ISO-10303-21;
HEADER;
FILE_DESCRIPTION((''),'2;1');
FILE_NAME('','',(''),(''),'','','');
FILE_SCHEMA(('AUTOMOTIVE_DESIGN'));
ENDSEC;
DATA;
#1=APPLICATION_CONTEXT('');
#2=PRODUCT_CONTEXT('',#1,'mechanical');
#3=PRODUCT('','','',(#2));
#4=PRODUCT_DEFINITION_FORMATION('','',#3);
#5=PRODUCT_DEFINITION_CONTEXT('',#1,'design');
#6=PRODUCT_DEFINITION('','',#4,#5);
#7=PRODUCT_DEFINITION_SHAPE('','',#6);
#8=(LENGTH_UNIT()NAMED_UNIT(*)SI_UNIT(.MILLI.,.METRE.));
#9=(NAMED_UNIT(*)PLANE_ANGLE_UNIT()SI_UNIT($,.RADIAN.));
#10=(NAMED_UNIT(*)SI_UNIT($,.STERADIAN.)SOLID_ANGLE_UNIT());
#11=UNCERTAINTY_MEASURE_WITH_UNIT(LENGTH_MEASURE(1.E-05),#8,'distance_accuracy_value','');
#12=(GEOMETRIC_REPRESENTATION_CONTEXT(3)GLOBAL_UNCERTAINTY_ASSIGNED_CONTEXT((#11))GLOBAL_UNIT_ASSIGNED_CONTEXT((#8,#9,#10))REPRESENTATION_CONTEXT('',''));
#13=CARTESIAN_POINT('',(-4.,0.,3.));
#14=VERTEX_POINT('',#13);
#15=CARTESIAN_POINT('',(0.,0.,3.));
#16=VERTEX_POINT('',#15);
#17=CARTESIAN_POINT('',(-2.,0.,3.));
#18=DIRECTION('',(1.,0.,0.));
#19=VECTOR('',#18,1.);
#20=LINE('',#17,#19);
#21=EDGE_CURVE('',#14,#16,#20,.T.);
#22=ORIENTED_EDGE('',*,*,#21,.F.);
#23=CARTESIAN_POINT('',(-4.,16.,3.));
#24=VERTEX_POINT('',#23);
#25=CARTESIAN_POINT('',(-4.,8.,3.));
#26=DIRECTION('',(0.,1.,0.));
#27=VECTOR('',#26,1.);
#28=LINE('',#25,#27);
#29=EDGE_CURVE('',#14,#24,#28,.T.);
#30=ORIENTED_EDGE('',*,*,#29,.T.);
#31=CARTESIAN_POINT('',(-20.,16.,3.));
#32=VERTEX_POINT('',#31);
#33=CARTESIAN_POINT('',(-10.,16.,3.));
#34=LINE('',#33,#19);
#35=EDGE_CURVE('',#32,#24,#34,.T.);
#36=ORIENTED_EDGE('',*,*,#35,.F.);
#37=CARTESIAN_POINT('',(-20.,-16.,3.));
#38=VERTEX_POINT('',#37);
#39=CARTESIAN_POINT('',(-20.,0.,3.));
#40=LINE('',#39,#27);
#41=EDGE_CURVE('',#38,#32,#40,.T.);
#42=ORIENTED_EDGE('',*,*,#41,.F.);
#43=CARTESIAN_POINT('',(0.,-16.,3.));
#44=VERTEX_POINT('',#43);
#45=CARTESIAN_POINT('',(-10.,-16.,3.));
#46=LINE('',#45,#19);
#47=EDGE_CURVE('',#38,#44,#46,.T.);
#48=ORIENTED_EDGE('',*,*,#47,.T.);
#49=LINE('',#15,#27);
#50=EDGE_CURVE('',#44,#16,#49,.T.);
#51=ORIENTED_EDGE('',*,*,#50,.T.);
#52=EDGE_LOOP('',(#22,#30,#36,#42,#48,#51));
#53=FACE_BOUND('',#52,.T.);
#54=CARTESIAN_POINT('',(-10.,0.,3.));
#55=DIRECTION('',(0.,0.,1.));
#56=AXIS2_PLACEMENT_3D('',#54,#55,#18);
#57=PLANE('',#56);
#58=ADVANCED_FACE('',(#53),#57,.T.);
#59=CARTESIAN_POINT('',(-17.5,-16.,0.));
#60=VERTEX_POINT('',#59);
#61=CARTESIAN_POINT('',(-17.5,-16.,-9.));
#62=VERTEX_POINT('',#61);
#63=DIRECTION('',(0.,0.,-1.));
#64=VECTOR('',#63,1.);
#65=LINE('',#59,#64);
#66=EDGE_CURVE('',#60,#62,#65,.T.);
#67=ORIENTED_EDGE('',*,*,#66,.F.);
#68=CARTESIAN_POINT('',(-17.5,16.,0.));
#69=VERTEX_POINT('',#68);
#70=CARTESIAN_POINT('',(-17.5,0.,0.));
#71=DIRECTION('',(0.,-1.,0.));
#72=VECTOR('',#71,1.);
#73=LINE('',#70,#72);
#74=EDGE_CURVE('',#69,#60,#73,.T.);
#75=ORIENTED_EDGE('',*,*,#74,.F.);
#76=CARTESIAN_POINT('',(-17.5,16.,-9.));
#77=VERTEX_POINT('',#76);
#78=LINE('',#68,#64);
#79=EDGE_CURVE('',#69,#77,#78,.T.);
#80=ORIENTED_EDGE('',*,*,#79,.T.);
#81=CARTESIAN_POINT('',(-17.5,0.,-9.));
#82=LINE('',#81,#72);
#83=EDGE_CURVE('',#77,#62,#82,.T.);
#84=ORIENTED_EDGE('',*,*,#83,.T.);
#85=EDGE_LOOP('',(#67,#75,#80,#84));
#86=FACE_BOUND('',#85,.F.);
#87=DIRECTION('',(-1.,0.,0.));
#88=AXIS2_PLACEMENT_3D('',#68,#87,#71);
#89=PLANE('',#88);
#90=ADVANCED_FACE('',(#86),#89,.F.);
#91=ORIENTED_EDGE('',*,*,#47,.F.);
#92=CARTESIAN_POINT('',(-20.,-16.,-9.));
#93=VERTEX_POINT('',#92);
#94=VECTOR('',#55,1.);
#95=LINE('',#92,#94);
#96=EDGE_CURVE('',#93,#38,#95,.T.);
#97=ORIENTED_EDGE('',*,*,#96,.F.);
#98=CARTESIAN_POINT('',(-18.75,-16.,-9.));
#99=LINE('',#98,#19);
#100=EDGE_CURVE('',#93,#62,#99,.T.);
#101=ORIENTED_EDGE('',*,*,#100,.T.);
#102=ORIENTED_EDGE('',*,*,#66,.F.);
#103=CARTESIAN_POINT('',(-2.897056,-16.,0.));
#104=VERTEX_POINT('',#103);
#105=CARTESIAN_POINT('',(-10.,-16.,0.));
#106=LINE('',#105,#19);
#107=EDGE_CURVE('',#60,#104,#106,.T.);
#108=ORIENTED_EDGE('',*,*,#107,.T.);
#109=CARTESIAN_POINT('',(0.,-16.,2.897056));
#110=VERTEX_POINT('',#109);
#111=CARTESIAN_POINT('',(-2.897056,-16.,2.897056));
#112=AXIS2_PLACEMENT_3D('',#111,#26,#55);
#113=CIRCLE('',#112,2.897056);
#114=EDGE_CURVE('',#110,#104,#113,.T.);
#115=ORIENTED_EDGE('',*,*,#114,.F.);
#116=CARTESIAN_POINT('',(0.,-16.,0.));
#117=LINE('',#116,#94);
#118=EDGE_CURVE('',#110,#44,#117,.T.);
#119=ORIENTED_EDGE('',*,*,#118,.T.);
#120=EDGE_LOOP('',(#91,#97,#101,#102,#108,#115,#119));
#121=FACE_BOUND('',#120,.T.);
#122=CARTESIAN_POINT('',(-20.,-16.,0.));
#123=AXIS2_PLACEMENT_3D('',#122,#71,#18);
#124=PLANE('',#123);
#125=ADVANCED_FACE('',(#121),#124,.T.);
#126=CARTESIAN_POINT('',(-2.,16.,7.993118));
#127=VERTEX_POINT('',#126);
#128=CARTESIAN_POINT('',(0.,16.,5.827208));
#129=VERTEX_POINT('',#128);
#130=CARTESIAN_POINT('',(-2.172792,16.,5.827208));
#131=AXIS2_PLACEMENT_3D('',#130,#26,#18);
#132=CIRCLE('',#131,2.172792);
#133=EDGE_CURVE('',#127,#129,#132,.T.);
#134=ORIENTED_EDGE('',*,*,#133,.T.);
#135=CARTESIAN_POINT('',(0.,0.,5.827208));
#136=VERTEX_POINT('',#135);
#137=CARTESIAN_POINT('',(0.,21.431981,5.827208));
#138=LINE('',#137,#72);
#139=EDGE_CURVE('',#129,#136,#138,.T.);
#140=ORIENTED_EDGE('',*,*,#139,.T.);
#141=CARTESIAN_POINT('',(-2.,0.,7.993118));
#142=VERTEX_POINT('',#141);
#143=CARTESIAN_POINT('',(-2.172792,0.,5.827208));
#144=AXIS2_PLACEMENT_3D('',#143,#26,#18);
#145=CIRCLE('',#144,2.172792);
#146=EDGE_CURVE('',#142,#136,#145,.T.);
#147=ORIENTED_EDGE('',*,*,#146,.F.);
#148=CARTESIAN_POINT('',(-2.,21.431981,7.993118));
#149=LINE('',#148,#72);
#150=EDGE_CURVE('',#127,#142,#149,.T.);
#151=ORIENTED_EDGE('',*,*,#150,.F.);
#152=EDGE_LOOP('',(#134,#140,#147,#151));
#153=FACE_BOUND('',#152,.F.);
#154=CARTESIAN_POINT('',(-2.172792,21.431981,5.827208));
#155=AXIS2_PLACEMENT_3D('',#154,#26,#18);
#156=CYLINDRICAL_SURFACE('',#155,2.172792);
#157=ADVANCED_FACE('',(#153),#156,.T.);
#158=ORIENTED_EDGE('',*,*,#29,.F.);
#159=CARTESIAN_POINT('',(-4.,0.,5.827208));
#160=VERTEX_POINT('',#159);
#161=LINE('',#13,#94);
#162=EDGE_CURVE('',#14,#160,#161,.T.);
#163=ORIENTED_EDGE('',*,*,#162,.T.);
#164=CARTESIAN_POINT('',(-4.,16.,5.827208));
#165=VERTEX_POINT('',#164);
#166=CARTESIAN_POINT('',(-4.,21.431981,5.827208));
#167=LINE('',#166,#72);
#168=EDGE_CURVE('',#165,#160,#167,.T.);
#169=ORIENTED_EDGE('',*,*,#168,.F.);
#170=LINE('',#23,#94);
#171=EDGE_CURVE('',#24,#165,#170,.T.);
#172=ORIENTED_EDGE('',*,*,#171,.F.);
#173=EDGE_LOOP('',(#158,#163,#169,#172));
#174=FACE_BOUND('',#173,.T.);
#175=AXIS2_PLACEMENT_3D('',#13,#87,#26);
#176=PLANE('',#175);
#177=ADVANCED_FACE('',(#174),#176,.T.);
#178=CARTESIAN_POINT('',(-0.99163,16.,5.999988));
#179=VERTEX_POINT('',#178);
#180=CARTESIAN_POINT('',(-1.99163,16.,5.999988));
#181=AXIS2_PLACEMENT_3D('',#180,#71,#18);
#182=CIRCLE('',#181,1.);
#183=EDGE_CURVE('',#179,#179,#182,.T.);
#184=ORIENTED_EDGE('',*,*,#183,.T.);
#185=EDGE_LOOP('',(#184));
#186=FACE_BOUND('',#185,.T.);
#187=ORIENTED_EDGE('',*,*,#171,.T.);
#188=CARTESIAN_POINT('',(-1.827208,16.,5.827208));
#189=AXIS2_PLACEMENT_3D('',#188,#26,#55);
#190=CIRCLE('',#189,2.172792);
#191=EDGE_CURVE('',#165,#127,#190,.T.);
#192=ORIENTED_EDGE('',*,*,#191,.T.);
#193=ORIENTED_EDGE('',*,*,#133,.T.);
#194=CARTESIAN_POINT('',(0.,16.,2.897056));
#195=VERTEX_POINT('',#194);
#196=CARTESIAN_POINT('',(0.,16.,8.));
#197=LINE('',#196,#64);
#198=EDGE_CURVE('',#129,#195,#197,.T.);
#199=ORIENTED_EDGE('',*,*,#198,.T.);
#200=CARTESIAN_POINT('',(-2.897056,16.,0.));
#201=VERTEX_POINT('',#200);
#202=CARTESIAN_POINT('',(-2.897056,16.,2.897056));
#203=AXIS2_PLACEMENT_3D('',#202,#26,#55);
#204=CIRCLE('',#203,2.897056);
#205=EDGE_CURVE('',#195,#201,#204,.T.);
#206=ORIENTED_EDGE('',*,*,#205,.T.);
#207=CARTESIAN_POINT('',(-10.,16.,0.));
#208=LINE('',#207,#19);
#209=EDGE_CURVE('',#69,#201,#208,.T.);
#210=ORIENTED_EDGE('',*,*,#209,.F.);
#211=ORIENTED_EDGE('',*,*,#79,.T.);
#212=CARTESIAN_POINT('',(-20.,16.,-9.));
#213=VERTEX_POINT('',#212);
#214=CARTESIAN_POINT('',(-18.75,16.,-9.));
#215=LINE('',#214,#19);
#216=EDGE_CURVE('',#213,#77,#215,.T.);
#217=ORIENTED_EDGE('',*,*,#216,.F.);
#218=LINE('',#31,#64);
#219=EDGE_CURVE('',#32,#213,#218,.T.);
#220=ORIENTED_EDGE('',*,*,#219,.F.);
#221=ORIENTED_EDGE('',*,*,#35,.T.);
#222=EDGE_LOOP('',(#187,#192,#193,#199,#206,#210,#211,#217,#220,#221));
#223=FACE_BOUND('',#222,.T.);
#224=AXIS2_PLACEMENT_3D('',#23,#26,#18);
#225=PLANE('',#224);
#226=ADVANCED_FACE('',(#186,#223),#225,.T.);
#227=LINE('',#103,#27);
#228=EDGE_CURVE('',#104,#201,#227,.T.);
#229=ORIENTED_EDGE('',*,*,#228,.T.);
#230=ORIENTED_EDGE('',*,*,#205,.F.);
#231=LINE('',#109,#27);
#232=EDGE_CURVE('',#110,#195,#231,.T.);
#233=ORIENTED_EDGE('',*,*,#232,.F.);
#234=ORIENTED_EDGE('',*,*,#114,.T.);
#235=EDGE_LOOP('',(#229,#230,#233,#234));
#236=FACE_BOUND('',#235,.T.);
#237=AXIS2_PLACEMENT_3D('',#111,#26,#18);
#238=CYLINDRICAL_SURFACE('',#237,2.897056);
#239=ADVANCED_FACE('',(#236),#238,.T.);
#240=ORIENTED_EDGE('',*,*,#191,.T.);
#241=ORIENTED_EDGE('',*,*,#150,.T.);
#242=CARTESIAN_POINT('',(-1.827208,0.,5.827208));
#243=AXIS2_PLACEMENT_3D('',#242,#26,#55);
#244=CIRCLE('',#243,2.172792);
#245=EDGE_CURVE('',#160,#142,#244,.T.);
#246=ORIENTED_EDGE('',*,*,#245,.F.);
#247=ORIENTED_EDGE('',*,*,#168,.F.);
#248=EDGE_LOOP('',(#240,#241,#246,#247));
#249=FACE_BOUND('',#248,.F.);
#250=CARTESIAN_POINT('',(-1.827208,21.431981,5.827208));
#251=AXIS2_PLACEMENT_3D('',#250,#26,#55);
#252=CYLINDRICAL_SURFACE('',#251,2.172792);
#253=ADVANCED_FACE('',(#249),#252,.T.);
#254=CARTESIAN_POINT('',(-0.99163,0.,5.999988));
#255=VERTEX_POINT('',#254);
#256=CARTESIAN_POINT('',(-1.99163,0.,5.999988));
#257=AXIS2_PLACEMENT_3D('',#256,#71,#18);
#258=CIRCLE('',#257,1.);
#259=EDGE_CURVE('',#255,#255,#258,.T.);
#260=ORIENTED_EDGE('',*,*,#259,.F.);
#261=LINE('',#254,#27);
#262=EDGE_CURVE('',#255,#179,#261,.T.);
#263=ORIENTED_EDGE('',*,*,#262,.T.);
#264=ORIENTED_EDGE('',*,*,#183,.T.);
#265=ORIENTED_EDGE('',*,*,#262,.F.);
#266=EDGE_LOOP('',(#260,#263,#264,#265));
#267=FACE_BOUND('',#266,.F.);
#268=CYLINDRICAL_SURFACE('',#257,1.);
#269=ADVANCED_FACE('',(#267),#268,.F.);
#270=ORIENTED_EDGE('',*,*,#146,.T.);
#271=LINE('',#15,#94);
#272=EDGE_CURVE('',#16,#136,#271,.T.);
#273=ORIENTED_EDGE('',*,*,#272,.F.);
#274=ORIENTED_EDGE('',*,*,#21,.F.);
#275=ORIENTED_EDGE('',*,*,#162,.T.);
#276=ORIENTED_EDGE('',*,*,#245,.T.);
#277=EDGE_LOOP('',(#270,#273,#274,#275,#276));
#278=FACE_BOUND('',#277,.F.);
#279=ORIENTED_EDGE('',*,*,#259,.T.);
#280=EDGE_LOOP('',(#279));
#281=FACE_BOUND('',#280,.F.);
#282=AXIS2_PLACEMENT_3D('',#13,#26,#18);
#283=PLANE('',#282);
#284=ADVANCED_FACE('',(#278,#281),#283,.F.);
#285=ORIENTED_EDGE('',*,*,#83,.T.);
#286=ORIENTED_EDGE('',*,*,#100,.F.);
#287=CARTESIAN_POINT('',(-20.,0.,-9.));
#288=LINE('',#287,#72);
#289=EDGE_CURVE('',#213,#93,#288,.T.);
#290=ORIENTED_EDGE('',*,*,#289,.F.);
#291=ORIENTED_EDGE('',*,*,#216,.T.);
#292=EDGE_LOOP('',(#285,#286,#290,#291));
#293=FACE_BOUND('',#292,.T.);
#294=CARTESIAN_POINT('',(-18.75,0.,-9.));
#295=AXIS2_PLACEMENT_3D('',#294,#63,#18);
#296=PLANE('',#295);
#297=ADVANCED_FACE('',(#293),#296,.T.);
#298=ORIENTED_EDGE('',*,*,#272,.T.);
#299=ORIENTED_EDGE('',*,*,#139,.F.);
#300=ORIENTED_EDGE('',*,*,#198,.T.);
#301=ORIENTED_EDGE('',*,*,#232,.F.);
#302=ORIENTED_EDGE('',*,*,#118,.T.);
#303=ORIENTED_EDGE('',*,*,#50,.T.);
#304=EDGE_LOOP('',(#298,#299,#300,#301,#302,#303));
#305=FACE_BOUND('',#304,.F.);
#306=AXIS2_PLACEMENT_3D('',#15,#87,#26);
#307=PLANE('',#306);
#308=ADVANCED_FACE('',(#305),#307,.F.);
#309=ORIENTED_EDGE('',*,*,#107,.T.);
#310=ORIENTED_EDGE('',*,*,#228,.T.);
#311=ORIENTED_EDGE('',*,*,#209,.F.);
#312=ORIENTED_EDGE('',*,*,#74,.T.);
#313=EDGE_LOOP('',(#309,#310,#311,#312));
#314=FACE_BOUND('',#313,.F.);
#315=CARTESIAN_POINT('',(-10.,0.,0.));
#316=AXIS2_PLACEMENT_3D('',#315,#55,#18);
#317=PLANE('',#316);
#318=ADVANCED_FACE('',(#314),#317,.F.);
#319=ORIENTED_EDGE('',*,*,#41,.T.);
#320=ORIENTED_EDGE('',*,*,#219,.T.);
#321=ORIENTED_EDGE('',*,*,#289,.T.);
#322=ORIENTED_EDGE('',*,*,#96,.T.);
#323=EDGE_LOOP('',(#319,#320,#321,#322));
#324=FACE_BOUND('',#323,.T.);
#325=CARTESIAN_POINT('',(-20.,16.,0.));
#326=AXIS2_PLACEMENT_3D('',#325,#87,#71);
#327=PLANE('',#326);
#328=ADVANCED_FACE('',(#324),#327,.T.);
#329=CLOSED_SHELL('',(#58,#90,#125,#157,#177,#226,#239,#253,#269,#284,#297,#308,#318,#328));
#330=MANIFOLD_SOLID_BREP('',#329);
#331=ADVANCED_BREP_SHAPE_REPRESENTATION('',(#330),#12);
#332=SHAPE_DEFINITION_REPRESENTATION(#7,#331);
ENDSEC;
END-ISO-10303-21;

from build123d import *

# Parameters (mm, degrees)
F0_W        = 20
F0_H        = 32
F1_DEPTH    = 3
F2_W        = 2.5
F2_H        = 32
F3_DEPTH    = 9
F4_R        = 2.8970562748
F5_W        = 4
F5_H        = 16
F6_DEPTH    = 5
F7_R        = 1
F8_DEPTH    = 25
F9_T1_DEPTH = 26.8639610307


# Not quite as in the source:
# - a fillet or chamfer that OpenCascade refuses, or shapes differently, is made with other operations: its cross-section is extruded or revolved along the edge and cut away or added


with BuildPart() as f1:
    # F0 (on Top) → F1 (new body)
    with BuildSketch(Plane.XY):
        with Locations((-10, 0)):
            Rectangle(F0_W, F0_H)
    extrude(amount=F1_DEPTH)

    # F2 (on face) → F3 (join)
    with BuildSketch(Plane(origin=(0, 0, 0), x_dir=(1, 0, 0), z_dir=(0, 0, -1))):
        with Locations((-18.75, 0)):
            Rectangle(F2_W, F2_H)
    extrude(amount=F3_DEPTH)

    # F4
    f4_edges = [f1.edges().sort_by_distance(p)[0] for p in [
        (0, 0, 0),
    ]]
    fillet(f4_edges, radius=F4_R)

    # F5 (on face) → F6 (join)
    with BuildSketch(Plane.XY.offset(3)):
        with Locations((-2, 8)):
            Rectangle(F5_W, F5_H)
    extrude(amount=F6_DEPTH)

    # F7 (on face) → F8 (cut)
    with BuildSketch(Plane.XZ):
        with Locations((-1.9916295272, 5.9999883225)):
            Circle(F7_R)
    extrude(amount=-F8_DEPTH, mode=Mode.SUBTRACT)

    # F9: fillet of radius 2.1727922061 on 2 edges, made by hand

    # F9_s2 → F9_t1 (cut)
    with BuildSketch(Plane.XZ.offset(-21.4319805153)):
        with BuildLine():
            ThreePointArc((-1.8272077939, 8), (-3.3636038969, 7.3636038969), (-4, 5.8272077939))
            Line((-4, 5.8272077939), (-4, 8))
            Line((-4, 8), (-1.8272077939, 8))
        make_face()
        with BuildLine():
            ThreePointArc((0, 5.8272077939), (-0.6363961031, 7.3636038969), (-2.1727922061, 8))
            Line((-2.1727922061, 8), (0, 8))
            Line((0, 8), (0, 5.8272077939))
        make_face()
    extrude(amount=F9_T1_DEPTH, mode=Mode.SUBTRACT)


solid = f1.part
